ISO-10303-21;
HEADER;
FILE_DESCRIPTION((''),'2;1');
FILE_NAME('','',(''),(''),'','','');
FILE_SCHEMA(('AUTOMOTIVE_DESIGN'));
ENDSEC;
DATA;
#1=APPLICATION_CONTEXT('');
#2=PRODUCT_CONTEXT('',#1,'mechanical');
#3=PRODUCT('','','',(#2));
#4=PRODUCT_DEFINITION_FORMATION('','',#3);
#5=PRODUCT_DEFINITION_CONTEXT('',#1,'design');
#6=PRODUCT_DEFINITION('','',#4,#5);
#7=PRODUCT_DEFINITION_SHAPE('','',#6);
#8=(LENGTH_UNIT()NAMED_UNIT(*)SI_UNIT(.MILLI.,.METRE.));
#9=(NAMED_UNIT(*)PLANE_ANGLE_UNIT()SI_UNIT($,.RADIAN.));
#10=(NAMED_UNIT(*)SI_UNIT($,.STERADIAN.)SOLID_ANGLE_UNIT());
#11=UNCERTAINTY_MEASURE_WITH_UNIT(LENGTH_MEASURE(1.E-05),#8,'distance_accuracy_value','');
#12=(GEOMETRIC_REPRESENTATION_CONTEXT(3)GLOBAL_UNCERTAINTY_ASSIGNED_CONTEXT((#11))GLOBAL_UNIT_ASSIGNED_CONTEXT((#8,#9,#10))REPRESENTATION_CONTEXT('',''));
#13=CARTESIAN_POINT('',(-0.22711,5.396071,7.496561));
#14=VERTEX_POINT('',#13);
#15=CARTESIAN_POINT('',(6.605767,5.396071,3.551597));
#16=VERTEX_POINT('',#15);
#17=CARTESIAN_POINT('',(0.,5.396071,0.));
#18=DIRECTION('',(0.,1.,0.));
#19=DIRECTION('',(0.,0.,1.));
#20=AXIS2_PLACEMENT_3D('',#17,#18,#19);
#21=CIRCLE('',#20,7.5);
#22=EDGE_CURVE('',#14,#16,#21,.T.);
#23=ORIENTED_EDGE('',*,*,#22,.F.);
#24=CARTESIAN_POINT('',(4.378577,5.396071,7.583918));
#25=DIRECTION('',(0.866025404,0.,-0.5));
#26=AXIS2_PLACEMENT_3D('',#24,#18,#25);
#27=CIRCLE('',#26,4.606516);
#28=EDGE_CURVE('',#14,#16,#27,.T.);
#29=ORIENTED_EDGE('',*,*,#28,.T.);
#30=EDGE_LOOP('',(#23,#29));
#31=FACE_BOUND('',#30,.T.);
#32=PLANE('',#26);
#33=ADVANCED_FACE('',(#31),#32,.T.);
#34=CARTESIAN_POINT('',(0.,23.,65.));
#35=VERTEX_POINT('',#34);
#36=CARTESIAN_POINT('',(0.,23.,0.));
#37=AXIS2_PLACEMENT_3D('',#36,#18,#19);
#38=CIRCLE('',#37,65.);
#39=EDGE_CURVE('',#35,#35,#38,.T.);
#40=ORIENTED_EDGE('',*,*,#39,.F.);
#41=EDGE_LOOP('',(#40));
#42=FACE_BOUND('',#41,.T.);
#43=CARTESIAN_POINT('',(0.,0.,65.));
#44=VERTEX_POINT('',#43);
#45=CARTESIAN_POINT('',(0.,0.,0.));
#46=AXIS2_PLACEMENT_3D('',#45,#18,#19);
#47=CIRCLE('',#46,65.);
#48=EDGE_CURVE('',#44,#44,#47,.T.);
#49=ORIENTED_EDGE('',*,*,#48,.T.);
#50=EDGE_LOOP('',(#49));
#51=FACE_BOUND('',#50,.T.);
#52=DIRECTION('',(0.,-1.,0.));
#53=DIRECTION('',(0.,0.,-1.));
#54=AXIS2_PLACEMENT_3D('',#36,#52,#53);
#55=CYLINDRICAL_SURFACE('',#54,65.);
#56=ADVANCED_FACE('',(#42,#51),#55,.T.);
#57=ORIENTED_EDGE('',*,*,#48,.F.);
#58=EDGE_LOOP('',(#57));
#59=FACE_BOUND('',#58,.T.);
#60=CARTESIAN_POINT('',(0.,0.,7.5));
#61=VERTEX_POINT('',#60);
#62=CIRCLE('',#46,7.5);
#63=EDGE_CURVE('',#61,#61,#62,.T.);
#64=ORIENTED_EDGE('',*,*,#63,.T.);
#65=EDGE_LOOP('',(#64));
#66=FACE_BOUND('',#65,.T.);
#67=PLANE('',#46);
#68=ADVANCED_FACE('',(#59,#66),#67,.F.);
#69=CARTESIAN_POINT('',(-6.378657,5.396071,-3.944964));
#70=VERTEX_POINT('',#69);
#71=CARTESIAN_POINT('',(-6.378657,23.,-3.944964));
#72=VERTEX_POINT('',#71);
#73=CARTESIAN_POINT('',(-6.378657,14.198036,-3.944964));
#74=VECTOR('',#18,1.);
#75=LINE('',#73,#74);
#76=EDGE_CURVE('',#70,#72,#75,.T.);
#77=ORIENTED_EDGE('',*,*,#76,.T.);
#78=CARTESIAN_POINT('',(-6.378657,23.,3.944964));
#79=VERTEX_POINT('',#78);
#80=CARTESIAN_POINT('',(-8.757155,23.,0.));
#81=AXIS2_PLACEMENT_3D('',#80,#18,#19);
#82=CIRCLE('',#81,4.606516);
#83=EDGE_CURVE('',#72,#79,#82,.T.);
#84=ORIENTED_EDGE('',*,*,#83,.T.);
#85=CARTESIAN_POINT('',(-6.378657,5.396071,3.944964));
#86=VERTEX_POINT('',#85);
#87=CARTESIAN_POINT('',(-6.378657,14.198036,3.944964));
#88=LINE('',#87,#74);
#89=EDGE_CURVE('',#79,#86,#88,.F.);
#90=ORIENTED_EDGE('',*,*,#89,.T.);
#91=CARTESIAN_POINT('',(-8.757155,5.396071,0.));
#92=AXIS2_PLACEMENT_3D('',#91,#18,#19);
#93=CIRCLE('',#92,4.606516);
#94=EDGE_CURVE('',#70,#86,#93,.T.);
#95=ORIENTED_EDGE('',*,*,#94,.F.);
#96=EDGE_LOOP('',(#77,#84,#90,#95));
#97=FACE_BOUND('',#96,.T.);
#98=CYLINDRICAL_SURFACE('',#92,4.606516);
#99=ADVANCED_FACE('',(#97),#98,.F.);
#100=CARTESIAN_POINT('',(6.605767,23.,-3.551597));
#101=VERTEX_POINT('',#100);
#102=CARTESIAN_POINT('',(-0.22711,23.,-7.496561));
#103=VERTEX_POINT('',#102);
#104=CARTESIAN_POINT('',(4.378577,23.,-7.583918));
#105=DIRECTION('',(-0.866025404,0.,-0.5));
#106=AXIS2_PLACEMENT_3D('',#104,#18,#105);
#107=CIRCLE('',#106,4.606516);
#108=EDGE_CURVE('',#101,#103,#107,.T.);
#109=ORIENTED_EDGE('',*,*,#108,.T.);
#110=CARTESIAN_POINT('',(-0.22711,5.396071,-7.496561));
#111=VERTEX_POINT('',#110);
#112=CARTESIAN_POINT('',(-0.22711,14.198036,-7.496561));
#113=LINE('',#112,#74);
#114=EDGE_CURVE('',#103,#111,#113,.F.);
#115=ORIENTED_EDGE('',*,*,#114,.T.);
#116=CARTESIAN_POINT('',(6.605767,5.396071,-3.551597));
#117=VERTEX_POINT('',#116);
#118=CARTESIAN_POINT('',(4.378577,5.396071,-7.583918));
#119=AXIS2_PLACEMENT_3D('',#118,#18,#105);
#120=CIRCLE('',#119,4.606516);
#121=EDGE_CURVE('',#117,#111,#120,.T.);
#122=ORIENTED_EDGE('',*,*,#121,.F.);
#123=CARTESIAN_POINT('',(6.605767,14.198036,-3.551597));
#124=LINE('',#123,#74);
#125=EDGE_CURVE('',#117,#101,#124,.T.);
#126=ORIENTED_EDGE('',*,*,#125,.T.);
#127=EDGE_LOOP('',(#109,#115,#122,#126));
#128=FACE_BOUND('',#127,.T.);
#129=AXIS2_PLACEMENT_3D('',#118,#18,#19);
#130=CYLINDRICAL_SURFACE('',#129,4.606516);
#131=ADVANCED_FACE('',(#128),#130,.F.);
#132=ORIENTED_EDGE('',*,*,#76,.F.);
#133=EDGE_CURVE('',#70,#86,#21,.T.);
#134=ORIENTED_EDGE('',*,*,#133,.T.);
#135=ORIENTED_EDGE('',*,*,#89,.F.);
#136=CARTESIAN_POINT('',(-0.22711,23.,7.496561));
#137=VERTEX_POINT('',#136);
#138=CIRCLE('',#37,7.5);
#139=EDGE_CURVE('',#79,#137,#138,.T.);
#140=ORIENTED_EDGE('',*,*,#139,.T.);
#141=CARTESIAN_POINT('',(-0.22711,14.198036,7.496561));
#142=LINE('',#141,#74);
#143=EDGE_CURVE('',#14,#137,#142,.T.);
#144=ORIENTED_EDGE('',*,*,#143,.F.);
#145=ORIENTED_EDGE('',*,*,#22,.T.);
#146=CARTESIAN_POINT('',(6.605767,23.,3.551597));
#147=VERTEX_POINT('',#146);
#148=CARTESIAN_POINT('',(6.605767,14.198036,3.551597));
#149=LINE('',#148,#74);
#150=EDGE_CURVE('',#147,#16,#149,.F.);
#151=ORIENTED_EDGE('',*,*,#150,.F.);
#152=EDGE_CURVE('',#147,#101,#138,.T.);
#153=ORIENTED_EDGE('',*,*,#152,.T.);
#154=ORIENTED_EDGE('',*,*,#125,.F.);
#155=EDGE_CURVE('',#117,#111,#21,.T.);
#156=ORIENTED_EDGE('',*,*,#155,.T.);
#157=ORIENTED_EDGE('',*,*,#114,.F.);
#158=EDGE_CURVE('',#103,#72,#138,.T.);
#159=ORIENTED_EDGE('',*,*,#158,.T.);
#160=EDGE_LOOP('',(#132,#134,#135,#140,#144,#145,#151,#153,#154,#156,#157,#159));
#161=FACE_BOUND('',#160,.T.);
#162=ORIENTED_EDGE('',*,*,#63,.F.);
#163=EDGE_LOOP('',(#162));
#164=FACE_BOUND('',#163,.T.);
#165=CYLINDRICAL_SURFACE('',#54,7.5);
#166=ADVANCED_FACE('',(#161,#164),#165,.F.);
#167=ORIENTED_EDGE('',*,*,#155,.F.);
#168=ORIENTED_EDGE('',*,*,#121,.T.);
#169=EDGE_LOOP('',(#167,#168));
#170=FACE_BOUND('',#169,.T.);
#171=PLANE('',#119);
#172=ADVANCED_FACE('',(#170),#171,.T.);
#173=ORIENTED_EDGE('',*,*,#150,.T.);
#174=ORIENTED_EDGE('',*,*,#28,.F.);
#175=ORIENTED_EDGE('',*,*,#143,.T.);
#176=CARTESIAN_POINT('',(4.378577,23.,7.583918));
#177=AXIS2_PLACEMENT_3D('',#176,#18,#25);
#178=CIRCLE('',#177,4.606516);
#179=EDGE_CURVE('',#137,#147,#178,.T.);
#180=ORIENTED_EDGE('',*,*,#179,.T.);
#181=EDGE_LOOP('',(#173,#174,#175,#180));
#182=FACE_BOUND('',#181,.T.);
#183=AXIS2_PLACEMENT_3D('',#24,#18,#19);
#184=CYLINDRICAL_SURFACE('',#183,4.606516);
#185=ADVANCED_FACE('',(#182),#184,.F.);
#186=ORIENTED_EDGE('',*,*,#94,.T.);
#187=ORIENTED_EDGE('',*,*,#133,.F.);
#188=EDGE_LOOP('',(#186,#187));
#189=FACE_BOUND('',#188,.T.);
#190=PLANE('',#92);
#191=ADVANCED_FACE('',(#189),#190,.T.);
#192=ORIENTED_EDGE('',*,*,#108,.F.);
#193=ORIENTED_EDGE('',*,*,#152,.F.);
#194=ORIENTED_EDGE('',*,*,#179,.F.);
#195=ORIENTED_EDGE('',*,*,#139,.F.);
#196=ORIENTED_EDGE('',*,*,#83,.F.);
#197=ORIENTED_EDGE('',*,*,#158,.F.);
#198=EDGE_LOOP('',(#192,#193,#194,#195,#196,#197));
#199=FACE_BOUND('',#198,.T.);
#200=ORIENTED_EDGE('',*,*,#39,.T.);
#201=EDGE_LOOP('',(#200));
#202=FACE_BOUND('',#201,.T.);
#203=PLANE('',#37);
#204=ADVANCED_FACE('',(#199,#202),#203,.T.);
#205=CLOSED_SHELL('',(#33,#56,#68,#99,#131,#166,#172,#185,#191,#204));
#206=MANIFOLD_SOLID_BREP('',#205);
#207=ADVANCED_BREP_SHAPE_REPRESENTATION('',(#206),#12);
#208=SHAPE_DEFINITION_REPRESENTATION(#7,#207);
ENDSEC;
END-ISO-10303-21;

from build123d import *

# Parameters (mm, degrees)
SKETCH1_R           = 65
BOSS_EXTRUDE1_DEPTH = 23
SKETCH2_R           = 7.5
CUT_EXTRUDE1_DEPTH  = 95.757585448
SKETCH3_R           = 4.606516016
CUT_EXTRUDE2_DEPTH  = 17.603928813
CIRPATTERN1_COUNT   = 3


with BuildPart() as part:
    # Sketch1 → Boss-Extrude1 (new body)
    with BuildSketch(Plane(origin=(0, 0, 0), x_dir=(1, 0, 0), z_dir=(0, 1, 0))):
        Circle(SKETCH1_R)
    extrude(amount=BOSS_EXTRUDE1_DEPTH)

    # Sketch2 → Cut-Extrude1 (cut, through all)
    with BuildSketch(Plane(origin=(0, 0, 0), x_dir=(1, 0, 0), z_dir=(0, 1, 0))):
        Circle(SKETCH2_R)
    extrude(amount=CUT_EXTRUDE1_DEPTH, mode=Mode.SUBTRACT)

    # Sketch3 → Cut-Extrude2 (cut)
    with BuildSketch(Plane(origin=(0, 23, 0), x_dir=(1, 0, 0), z_dir=(0, 1, 0))):
        with Locations((-8.757154678, 0)):
            Circle(SKETCH3_R)
    cut_extrude2 = extrude(amount=-CUT_EXTRUDE2_DEPTH, mode=Mode.SUBTRACT)

    # CirPattern1: Cut-Extrude2 ×3 about axis
    cirpattern1_axis = Axis((0, 0, 0), (0, 1, 0))
    for i in range(1, CIRPATTERN1_COUNT):
        add(cut_extrude2.rotate(cirpattern1_axis, i * 360 / CIRPATTERN1_COUNT), mode=Mode.SUBTRACT)


solid = part.part
